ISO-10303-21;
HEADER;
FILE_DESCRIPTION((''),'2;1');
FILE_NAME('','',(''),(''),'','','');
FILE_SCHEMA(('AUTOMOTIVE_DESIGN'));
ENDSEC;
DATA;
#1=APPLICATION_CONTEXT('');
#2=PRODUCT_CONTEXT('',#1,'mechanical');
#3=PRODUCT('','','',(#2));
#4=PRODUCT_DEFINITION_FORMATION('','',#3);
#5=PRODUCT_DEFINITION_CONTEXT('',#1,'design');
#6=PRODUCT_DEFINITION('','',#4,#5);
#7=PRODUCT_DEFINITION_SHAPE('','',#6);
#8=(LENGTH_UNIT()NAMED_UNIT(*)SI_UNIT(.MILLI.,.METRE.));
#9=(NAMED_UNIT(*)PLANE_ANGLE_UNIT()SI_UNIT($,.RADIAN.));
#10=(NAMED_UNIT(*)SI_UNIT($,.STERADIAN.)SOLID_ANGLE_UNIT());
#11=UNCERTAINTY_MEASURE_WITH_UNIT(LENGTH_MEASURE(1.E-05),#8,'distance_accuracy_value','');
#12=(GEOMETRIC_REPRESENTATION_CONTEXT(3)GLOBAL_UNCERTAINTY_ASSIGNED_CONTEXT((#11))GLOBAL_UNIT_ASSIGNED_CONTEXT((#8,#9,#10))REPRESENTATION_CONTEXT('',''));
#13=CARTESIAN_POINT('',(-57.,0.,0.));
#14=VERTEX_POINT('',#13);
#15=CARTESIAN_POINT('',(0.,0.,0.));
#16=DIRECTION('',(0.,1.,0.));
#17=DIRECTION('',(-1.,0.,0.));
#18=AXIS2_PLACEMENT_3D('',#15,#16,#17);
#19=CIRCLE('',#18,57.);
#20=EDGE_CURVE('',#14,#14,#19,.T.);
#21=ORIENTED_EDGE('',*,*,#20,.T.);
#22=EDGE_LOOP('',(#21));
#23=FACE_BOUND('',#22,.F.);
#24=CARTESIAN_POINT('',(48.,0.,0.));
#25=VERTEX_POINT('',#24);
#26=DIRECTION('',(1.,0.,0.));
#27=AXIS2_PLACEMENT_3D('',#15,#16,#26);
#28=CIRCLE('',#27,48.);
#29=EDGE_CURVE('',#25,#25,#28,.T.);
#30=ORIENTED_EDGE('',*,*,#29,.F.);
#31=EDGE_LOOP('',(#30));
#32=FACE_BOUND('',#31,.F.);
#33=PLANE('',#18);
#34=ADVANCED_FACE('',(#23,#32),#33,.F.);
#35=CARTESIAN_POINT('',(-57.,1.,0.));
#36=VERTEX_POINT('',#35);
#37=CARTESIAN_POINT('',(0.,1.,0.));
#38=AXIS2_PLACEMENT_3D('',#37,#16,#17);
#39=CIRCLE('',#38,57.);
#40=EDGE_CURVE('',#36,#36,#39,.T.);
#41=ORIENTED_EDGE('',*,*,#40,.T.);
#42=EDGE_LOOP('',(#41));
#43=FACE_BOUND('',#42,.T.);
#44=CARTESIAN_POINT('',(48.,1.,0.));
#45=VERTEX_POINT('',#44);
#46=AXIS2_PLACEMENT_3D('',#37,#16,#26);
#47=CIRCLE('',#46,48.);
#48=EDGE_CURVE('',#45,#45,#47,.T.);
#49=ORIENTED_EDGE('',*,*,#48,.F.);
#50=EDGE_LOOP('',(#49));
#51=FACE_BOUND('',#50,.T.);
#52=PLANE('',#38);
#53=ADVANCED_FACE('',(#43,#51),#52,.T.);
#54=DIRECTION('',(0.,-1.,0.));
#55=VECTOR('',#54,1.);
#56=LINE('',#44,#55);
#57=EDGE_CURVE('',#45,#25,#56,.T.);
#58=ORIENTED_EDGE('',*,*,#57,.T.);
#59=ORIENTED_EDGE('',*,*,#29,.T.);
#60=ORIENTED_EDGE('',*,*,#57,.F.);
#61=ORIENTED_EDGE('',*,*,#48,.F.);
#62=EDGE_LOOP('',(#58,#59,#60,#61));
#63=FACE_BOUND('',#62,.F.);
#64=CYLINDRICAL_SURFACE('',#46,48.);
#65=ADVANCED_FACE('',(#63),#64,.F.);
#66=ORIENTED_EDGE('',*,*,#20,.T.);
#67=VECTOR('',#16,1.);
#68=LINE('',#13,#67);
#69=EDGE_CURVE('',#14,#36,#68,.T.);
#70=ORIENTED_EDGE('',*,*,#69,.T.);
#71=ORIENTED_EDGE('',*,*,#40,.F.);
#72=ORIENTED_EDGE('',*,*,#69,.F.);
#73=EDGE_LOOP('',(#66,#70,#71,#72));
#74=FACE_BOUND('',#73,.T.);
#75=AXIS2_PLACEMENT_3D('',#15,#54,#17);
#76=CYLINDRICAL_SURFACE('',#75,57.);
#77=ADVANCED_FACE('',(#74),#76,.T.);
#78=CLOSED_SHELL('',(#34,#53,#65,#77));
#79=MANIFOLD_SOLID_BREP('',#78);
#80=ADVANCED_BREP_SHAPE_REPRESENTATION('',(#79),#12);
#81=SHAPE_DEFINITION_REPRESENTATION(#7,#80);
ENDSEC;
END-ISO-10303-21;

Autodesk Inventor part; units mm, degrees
ref_plane "YZ Plane" through (0, 0, 0) normal (1, 0, 0) x (0, 1, 0)
ref_plane "XZ Plane" through (0, 0, 0) normal (0, 1, 0) x (-1, 0, 0)
ref_plane "XY Plane" through (0, 0, 0) normal (0, 0, 1) x (1, 0, 0)
sketch "Skizze5" plane through (0, 0, 0) normal (0, 0, 1) x (1, 0, 0)
  line L0 (0, 0) -> (0, -48)
  arc A0 (-48, 0) -> (0, -48) centre (0, 0) ccw
  dimension "d17" = 48
surface revolve "Rotationsfläche3" sketch "Skizze5" angle 360 about axis through (0, 0, 0) along (0, -1, 0) shown yes curves A0 L0
sketch "Skizze6" plane through (0, 0, 0) normal (0, 0, 1) x (1, 0, 0)
  line L0 (0, 0) -> (0, -49)
  arc A0 (-49, 0) -> (0, -49) centre (0, 0) ccw
  dimension "d19" = 49
surface revolve "Rotationsfläche4" sketch "Skizze6" angle 360 about axis through (0, 0, 0) along (0, -1, 0) shown yes curves A0 L0
sketch "Skizze7" plane through (0, 0, 0) normal (0, 1, 0) x (-1, 0, 0)
  circle A0 centre (0, 0) radius 57
  dimension "d21" = 114
extrude "Extrusion1" add sketch "Skizze7" along normal blind 1
sketch "Skizze8" plane through (0, 1, 0) normal (0, 1, 0) x (1, 0, 0)
  point P0 (0, 0)
sketch "Skizze9" plane through (0, 1, 0) normal (0, 1, 0) x (1, 0, 0)
  circle A0 centre (0, 0) radius 48
extrude "Extrusion2" cut sketch "Skizze9" against normal blind 1
properties part number "Futterschüssel_innen"
